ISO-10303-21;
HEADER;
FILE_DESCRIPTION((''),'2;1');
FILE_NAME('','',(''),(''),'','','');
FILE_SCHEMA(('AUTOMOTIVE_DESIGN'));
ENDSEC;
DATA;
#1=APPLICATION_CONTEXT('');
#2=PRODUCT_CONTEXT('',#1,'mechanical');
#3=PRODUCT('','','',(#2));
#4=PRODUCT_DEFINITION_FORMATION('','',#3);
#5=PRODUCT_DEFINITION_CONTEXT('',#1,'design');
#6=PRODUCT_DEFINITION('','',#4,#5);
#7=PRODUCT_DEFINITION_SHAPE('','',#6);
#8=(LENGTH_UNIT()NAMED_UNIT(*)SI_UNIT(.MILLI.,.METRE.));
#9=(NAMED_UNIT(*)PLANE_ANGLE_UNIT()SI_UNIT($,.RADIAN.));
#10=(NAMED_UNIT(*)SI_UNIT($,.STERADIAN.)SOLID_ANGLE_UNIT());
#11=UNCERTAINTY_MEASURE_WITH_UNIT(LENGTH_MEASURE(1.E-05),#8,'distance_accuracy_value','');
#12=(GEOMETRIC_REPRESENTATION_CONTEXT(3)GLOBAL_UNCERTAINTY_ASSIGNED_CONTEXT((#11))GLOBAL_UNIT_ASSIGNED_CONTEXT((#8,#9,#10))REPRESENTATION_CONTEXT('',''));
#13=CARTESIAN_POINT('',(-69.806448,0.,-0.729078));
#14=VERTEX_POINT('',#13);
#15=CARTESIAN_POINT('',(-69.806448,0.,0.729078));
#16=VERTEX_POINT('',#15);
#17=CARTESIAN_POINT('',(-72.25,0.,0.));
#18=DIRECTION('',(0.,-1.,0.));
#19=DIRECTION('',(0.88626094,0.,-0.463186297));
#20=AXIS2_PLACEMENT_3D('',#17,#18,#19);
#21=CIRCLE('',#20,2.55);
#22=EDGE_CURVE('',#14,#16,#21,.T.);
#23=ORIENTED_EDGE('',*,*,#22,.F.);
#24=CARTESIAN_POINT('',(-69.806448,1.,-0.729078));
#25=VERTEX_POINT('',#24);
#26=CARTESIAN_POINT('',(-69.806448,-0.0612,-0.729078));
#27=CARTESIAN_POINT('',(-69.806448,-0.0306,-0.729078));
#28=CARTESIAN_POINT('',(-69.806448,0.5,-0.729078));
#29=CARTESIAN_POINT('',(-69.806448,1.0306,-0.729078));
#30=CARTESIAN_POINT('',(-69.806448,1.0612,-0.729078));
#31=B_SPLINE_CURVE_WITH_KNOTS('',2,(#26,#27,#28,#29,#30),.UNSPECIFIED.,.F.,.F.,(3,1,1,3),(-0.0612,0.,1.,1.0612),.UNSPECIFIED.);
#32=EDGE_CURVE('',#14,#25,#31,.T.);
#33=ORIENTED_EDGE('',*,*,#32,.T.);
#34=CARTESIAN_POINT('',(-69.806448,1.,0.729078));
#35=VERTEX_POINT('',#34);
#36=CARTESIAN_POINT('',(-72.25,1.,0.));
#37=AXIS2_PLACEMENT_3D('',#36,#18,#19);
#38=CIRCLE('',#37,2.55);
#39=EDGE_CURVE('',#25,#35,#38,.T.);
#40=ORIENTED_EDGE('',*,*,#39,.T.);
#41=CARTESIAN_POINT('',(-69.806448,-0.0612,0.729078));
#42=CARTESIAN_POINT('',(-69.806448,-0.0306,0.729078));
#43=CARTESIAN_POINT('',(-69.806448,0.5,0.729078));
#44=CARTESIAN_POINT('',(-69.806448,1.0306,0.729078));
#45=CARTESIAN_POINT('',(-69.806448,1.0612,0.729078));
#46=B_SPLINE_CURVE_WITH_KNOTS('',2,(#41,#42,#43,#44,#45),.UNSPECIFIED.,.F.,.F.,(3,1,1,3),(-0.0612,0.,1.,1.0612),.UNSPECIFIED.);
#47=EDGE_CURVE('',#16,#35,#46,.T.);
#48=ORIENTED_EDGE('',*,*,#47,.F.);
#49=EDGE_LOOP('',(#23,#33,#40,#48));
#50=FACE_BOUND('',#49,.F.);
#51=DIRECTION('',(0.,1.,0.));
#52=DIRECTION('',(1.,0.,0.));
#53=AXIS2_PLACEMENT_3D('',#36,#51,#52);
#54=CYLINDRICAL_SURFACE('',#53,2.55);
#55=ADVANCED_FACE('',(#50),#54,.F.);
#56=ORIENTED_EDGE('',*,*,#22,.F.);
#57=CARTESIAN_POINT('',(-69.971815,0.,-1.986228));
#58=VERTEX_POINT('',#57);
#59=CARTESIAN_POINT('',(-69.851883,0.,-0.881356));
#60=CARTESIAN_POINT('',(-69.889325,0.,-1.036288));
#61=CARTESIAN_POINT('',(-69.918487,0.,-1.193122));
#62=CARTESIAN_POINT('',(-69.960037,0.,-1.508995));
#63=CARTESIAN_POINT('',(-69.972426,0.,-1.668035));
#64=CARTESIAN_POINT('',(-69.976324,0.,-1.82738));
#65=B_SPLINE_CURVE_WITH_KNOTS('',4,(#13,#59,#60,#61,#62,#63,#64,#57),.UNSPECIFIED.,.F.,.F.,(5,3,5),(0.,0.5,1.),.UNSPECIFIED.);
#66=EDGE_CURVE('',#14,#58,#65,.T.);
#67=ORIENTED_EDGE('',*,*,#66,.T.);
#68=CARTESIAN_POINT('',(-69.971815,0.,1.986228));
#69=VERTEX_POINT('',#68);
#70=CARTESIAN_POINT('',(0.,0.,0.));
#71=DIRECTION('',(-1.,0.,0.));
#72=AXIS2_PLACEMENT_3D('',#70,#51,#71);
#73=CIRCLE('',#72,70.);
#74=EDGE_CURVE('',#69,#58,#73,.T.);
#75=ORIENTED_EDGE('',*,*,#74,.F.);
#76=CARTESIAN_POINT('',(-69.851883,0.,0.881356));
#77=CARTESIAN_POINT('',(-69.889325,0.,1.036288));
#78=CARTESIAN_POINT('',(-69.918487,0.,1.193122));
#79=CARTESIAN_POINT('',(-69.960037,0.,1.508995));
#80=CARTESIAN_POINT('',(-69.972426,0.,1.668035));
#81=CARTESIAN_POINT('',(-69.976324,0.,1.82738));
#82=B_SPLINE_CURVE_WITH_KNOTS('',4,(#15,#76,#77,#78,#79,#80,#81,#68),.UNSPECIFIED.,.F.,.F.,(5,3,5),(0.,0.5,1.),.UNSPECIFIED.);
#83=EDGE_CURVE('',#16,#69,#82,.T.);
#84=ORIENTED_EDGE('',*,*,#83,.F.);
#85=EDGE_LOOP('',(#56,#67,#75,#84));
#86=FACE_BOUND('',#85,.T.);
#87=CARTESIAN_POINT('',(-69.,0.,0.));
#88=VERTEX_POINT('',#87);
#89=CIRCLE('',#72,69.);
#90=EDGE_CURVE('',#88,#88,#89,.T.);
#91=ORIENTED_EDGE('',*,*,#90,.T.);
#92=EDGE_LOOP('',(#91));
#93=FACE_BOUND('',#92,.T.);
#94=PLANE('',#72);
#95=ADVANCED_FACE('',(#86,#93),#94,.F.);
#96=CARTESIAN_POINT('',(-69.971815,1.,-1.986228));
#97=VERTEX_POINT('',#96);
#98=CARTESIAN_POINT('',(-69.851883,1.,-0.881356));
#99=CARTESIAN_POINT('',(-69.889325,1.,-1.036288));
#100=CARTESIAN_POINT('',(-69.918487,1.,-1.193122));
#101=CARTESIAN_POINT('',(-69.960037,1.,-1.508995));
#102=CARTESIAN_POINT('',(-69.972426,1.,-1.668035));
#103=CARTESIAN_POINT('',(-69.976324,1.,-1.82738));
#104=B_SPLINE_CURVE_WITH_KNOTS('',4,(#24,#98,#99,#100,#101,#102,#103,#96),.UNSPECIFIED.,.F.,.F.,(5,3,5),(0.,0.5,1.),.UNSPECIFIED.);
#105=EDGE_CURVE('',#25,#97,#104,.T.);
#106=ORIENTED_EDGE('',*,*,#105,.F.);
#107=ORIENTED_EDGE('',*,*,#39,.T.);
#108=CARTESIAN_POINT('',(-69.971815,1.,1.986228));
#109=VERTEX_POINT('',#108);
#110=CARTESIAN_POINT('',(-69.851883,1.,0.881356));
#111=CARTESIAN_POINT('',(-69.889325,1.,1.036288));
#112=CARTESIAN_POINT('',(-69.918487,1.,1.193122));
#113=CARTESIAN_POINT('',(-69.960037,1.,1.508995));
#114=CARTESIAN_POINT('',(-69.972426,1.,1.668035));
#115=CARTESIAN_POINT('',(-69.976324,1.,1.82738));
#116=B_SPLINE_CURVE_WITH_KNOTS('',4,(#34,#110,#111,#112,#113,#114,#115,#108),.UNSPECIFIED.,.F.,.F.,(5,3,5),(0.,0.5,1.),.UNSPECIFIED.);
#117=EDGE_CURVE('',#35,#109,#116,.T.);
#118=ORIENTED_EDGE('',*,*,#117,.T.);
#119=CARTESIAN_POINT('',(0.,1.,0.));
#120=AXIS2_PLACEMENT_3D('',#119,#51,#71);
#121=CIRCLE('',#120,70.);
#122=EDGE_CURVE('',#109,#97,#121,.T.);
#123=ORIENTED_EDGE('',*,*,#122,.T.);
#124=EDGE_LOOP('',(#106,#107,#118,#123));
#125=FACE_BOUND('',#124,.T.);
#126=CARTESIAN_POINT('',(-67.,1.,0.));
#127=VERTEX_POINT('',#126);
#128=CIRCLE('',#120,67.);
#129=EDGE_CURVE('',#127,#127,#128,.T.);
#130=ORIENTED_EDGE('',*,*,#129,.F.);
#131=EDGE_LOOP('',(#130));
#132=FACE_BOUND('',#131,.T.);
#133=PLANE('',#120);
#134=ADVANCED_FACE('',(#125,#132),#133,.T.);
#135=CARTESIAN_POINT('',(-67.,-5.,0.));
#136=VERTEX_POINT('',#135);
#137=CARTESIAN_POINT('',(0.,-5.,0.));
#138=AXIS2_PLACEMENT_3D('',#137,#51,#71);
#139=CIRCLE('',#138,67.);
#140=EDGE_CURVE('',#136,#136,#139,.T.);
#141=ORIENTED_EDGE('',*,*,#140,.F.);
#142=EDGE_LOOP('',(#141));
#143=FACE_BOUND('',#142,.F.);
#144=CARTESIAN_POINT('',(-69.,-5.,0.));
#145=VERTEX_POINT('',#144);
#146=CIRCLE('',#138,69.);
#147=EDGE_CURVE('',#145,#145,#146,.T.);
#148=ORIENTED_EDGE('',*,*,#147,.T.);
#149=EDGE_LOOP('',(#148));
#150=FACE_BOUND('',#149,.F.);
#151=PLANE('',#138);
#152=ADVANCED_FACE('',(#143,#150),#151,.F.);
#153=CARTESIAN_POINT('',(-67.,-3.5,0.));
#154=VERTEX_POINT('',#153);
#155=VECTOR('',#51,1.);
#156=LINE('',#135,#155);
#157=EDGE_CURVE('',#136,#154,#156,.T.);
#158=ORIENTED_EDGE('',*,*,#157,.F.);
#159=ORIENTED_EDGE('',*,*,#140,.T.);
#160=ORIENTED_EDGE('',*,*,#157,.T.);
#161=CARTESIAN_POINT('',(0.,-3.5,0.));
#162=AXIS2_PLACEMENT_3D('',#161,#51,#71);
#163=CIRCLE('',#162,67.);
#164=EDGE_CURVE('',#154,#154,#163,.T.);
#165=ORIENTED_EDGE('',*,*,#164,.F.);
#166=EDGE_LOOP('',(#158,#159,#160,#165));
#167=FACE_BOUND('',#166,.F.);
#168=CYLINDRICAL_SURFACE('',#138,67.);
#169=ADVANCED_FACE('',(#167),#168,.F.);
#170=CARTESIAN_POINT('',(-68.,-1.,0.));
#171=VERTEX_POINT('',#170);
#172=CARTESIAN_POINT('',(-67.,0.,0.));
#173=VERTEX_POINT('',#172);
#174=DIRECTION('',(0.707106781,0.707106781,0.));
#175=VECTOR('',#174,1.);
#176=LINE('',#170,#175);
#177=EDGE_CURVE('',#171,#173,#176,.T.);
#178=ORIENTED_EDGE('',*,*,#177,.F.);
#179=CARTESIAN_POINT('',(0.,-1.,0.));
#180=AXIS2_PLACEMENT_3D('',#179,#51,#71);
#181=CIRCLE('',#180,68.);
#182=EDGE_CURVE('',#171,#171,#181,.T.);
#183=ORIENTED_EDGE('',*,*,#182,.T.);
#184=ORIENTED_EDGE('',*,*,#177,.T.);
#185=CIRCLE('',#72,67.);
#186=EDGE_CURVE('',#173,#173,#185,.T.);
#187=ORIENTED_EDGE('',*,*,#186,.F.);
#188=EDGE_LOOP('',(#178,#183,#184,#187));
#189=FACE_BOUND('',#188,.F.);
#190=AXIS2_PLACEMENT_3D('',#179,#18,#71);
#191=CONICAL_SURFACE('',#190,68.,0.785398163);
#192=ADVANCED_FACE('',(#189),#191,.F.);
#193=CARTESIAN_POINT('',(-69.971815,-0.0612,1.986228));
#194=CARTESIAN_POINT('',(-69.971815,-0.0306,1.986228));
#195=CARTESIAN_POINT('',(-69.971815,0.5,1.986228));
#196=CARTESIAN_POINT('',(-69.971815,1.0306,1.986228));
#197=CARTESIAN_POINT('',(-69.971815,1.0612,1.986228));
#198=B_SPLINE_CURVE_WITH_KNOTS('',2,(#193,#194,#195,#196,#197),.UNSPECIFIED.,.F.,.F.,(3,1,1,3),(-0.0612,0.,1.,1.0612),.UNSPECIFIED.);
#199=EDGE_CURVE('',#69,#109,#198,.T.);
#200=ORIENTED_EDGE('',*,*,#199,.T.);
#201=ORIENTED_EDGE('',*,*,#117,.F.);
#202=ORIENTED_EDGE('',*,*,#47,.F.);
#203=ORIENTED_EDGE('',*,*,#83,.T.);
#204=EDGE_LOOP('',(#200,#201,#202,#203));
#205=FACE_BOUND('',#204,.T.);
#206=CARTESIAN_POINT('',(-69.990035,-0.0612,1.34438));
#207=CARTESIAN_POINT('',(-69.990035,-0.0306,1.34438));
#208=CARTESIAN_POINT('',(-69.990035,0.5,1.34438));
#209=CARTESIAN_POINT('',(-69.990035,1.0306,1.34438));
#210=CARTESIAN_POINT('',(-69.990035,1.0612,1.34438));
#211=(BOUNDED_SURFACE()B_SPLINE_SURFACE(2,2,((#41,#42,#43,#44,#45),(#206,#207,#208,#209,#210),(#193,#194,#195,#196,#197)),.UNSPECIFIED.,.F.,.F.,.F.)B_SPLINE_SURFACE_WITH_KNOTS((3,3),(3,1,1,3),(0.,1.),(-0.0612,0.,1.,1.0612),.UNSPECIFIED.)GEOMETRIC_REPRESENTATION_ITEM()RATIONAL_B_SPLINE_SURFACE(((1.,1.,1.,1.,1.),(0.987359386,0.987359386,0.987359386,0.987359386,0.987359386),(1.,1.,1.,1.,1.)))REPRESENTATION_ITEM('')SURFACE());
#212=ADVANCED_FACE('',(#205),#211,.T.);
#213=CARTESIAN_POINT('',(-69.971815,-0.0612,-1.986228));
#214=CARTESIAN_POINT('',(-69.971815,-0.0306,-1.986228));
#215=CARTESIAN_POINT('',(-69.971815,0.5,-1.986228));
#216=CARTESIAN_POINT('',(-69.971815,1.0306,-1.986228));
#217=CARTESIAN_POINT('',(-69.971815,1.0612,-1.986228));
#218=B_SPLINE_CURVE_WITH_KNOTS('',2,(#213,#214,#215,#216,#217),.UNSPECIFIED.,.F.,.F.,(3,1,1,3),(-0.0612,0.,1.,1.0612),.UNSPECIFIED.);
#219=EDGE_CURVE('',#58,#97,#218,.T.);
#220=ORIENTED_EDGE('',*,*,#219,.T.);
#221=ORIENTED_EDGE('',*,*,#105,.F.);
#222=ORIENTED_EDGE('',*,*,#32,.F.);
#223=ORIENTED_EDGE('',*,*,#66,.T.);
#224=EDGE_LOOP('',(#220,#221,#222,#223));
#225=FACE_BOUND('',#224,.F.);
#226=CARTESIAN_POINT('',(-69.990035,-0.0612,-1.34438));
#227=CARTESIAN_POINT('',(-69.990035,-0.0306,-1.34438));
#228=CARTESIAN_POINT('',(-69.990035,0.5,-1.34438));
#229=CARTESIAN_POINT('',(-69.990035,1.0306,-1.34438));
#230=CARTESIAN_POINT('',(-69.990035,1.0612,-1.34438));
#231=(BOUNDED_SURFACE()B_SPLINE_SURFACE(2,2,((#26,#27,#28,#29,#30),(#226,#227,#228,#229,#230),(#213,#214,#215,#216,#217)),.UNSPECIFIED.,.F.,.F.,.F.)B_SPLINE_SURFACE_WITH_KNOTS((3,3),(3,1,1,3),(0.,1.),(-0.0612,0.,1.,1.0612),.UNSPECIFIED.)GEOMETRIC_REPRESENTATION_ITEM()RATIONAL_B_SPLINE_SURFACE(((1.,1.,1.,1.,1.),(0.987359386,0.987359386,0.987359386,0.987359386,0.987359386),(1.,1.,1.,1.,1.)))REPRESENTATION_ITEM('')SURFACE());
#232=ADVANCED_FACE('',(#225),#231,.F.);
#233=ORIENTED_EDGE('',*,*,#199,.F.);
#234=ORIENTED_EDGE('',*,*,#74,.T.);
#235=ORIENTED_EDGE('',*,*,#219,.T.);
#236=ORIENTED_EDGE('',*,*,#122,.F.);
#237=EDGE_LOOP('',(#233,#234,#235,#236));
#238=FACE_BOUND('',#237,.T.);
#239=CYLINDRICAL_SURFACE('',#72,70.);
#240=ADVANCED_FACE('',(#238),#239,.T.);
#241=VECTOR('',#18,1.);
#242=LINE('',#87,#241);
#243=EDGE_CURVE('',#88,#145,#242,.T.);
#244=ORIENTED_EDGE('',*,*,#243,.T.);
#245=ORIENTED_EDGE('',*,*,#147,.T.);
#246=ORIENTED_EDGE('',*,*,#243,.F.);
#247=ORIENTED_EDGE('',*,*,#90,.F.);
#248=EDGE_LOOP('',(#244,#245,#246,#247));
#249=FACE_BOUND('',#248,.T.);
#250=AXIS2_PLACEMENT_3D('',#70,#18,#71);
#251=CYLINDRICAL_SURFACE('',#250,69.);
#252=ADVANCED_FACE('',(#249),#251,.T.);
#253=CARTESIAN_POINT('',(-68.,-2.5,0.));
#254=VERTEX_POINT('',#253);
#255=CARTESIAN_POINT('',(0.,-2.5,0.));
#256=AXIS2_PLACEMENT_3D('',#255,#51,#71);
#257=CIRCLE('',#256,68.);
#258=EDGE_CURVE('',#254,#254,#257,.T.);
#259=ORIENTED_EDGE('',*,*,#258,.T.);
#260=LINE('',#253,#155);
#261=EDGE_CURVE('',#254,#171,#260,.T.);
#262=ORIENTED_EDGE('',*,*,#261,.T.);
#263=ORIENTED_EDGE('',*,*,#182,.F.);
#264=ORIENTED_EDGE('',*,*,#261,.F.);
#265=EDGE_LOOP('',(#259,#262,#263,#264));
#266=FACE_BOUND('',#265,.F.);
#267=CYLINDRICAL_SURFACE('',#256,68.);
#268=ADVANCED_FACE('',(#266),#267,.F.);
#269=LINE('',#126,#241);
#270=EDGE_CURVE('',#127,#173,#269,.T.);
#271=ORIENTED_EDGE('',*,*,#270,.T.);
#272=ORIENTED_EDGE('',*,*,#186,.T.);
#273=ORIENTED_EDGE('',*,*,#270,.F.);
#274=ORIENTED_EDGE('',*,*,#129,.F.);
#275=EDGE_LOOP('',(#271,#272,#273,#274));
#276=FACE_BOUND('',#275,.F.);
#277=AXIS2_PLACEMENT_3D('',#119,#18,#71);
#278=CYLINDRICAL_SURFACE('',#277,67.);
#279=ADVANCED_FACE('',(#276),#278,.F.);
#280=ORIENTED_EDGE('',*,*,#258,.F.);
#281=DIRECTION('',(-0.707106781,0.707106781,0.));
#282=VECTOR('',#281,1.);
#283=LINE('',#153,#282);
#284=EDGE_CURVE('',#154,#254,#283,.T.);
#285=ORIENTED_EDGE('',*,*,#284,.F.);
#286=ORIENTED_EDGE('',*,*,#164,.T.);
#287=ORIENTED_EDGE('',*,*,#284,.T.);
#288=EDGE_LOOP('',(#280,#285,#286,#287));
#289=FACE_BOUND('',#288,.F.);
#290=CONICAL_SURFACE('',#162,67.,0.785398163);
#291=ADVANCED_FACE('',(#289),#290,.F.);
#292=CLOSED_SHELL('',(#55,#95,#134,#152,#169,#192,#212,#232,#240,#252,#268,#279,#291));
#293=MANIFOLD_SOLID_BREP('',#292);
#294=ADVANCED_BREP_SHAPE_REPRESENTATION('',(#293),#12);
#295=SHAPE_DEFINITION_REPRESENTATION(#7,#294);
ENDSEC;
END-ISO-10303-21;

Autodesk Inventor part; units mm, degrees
ref_plane "YZ Plane" through (0, 0, 0) normal (1, 0, 0) x (0, 1, 0)
ref_plane "XZ Plane" through (0, 0, 0) normal (0, 1, 0) x (-1, 0, 0)
ref_plane "XY Plane" through (0, 0, 0) normal (0, 0, 1) x (1, 0, 0)
sketch "Sketch1" plane through (0, 0, 0) normal (0, 0, 1) x (1, 0, 0)
  line L0 (-67, 0) -> (-70, 0)
  line L1 (-70, 0) -> (-70, 1)
  line L2 (-70, 1) -> (-67, 1)
  line L3 (-67, 1) -> (-67, 0)
  line L4 (-67, 0) -> (-69, 0)
  line L5 (-69, 0) -> (-69, -5)
  line L6 (-69, -5) -> (-67, -5)
  line L7 (-67, -5) -> (-67, 0)
  line L8 (-61.5, -0.5) -> (-67.5, -0.5)
  line L9 (-67.5, -0.5) -> (-67.5, -3)
  line L10 (-67.5, -3) -> (-61.5, -3)
  line L11 (-61.5, -3) -> (-61.5, -0.5)
  line L12 (-67, -3.5) -> (-68, -2.5)
  line L13 (-68, -2.5) -> (-68, -1)
  line L14 (-68, -1) -> (-67, 0)
  line L15 (0, -6.2) -> (0, 2.2) projected
  point P0 (0, 0)
  point P1 (-69, 0)
  point P2 (-67.5, -1.75)
  point P3 (-70, 0.5)
  point P4 (-68, -1.75)
  dimension "d0" = 5
  dimension "d1" = 69
  dimension "d4" = 1
  dimension "d5" = 2.5
  dimension "d6" = 67.5
  dimension "d7" = 67
  dimension "d9" = 3.5
  dimension "d11" = 2
  dimension "d12" = 6
  dimension "d13" = 0.5
  dimension "d27" = 0.5
  dimension "d28" = 1
revolve "Revolution1" add sketch "Sketch1" angle 360 about axis through (0, -10, 0) along (0, 1, 0) contours L14 L13 L12 L7 L6 L5 L0 | L0 L1 L2 L3
sketch "Sketch2" plane through (0, 1, 0) normal (0, 1, 0) x (1, 0, 0)
  circle A0 centre (-72.25, 0) radius 2.55
  point P0 (0, 0)
  dimension "d16" = 5.1
  dimension "d17" = 72.25
extrude "Extrusion1" cut sketch "Sketch2" against normal through all
sketch "Sketch3" plane through (0, -5, 0) normal (0, -1, 0) x (0, 0, 1)
  arc A0 (-68.9899, -1.1809) -> (-68.9899, 1.1809) centre (-71.25, 0) ccw projected
  circle A1 centre (-71.25, 0) radius 4
  point P0 (0, 0)
  dimension "d20" = 8
extrude "Extrusion2" [suppressed]
fillet "Fillet1" radius 4 2 edges at (-69.99, 0.5, -1.1811) (-69.99, 0.5, 1.1811)
pattern_circular "Circular Pattern1" [suppressed]
properties part number "Ring Bearing Track"
